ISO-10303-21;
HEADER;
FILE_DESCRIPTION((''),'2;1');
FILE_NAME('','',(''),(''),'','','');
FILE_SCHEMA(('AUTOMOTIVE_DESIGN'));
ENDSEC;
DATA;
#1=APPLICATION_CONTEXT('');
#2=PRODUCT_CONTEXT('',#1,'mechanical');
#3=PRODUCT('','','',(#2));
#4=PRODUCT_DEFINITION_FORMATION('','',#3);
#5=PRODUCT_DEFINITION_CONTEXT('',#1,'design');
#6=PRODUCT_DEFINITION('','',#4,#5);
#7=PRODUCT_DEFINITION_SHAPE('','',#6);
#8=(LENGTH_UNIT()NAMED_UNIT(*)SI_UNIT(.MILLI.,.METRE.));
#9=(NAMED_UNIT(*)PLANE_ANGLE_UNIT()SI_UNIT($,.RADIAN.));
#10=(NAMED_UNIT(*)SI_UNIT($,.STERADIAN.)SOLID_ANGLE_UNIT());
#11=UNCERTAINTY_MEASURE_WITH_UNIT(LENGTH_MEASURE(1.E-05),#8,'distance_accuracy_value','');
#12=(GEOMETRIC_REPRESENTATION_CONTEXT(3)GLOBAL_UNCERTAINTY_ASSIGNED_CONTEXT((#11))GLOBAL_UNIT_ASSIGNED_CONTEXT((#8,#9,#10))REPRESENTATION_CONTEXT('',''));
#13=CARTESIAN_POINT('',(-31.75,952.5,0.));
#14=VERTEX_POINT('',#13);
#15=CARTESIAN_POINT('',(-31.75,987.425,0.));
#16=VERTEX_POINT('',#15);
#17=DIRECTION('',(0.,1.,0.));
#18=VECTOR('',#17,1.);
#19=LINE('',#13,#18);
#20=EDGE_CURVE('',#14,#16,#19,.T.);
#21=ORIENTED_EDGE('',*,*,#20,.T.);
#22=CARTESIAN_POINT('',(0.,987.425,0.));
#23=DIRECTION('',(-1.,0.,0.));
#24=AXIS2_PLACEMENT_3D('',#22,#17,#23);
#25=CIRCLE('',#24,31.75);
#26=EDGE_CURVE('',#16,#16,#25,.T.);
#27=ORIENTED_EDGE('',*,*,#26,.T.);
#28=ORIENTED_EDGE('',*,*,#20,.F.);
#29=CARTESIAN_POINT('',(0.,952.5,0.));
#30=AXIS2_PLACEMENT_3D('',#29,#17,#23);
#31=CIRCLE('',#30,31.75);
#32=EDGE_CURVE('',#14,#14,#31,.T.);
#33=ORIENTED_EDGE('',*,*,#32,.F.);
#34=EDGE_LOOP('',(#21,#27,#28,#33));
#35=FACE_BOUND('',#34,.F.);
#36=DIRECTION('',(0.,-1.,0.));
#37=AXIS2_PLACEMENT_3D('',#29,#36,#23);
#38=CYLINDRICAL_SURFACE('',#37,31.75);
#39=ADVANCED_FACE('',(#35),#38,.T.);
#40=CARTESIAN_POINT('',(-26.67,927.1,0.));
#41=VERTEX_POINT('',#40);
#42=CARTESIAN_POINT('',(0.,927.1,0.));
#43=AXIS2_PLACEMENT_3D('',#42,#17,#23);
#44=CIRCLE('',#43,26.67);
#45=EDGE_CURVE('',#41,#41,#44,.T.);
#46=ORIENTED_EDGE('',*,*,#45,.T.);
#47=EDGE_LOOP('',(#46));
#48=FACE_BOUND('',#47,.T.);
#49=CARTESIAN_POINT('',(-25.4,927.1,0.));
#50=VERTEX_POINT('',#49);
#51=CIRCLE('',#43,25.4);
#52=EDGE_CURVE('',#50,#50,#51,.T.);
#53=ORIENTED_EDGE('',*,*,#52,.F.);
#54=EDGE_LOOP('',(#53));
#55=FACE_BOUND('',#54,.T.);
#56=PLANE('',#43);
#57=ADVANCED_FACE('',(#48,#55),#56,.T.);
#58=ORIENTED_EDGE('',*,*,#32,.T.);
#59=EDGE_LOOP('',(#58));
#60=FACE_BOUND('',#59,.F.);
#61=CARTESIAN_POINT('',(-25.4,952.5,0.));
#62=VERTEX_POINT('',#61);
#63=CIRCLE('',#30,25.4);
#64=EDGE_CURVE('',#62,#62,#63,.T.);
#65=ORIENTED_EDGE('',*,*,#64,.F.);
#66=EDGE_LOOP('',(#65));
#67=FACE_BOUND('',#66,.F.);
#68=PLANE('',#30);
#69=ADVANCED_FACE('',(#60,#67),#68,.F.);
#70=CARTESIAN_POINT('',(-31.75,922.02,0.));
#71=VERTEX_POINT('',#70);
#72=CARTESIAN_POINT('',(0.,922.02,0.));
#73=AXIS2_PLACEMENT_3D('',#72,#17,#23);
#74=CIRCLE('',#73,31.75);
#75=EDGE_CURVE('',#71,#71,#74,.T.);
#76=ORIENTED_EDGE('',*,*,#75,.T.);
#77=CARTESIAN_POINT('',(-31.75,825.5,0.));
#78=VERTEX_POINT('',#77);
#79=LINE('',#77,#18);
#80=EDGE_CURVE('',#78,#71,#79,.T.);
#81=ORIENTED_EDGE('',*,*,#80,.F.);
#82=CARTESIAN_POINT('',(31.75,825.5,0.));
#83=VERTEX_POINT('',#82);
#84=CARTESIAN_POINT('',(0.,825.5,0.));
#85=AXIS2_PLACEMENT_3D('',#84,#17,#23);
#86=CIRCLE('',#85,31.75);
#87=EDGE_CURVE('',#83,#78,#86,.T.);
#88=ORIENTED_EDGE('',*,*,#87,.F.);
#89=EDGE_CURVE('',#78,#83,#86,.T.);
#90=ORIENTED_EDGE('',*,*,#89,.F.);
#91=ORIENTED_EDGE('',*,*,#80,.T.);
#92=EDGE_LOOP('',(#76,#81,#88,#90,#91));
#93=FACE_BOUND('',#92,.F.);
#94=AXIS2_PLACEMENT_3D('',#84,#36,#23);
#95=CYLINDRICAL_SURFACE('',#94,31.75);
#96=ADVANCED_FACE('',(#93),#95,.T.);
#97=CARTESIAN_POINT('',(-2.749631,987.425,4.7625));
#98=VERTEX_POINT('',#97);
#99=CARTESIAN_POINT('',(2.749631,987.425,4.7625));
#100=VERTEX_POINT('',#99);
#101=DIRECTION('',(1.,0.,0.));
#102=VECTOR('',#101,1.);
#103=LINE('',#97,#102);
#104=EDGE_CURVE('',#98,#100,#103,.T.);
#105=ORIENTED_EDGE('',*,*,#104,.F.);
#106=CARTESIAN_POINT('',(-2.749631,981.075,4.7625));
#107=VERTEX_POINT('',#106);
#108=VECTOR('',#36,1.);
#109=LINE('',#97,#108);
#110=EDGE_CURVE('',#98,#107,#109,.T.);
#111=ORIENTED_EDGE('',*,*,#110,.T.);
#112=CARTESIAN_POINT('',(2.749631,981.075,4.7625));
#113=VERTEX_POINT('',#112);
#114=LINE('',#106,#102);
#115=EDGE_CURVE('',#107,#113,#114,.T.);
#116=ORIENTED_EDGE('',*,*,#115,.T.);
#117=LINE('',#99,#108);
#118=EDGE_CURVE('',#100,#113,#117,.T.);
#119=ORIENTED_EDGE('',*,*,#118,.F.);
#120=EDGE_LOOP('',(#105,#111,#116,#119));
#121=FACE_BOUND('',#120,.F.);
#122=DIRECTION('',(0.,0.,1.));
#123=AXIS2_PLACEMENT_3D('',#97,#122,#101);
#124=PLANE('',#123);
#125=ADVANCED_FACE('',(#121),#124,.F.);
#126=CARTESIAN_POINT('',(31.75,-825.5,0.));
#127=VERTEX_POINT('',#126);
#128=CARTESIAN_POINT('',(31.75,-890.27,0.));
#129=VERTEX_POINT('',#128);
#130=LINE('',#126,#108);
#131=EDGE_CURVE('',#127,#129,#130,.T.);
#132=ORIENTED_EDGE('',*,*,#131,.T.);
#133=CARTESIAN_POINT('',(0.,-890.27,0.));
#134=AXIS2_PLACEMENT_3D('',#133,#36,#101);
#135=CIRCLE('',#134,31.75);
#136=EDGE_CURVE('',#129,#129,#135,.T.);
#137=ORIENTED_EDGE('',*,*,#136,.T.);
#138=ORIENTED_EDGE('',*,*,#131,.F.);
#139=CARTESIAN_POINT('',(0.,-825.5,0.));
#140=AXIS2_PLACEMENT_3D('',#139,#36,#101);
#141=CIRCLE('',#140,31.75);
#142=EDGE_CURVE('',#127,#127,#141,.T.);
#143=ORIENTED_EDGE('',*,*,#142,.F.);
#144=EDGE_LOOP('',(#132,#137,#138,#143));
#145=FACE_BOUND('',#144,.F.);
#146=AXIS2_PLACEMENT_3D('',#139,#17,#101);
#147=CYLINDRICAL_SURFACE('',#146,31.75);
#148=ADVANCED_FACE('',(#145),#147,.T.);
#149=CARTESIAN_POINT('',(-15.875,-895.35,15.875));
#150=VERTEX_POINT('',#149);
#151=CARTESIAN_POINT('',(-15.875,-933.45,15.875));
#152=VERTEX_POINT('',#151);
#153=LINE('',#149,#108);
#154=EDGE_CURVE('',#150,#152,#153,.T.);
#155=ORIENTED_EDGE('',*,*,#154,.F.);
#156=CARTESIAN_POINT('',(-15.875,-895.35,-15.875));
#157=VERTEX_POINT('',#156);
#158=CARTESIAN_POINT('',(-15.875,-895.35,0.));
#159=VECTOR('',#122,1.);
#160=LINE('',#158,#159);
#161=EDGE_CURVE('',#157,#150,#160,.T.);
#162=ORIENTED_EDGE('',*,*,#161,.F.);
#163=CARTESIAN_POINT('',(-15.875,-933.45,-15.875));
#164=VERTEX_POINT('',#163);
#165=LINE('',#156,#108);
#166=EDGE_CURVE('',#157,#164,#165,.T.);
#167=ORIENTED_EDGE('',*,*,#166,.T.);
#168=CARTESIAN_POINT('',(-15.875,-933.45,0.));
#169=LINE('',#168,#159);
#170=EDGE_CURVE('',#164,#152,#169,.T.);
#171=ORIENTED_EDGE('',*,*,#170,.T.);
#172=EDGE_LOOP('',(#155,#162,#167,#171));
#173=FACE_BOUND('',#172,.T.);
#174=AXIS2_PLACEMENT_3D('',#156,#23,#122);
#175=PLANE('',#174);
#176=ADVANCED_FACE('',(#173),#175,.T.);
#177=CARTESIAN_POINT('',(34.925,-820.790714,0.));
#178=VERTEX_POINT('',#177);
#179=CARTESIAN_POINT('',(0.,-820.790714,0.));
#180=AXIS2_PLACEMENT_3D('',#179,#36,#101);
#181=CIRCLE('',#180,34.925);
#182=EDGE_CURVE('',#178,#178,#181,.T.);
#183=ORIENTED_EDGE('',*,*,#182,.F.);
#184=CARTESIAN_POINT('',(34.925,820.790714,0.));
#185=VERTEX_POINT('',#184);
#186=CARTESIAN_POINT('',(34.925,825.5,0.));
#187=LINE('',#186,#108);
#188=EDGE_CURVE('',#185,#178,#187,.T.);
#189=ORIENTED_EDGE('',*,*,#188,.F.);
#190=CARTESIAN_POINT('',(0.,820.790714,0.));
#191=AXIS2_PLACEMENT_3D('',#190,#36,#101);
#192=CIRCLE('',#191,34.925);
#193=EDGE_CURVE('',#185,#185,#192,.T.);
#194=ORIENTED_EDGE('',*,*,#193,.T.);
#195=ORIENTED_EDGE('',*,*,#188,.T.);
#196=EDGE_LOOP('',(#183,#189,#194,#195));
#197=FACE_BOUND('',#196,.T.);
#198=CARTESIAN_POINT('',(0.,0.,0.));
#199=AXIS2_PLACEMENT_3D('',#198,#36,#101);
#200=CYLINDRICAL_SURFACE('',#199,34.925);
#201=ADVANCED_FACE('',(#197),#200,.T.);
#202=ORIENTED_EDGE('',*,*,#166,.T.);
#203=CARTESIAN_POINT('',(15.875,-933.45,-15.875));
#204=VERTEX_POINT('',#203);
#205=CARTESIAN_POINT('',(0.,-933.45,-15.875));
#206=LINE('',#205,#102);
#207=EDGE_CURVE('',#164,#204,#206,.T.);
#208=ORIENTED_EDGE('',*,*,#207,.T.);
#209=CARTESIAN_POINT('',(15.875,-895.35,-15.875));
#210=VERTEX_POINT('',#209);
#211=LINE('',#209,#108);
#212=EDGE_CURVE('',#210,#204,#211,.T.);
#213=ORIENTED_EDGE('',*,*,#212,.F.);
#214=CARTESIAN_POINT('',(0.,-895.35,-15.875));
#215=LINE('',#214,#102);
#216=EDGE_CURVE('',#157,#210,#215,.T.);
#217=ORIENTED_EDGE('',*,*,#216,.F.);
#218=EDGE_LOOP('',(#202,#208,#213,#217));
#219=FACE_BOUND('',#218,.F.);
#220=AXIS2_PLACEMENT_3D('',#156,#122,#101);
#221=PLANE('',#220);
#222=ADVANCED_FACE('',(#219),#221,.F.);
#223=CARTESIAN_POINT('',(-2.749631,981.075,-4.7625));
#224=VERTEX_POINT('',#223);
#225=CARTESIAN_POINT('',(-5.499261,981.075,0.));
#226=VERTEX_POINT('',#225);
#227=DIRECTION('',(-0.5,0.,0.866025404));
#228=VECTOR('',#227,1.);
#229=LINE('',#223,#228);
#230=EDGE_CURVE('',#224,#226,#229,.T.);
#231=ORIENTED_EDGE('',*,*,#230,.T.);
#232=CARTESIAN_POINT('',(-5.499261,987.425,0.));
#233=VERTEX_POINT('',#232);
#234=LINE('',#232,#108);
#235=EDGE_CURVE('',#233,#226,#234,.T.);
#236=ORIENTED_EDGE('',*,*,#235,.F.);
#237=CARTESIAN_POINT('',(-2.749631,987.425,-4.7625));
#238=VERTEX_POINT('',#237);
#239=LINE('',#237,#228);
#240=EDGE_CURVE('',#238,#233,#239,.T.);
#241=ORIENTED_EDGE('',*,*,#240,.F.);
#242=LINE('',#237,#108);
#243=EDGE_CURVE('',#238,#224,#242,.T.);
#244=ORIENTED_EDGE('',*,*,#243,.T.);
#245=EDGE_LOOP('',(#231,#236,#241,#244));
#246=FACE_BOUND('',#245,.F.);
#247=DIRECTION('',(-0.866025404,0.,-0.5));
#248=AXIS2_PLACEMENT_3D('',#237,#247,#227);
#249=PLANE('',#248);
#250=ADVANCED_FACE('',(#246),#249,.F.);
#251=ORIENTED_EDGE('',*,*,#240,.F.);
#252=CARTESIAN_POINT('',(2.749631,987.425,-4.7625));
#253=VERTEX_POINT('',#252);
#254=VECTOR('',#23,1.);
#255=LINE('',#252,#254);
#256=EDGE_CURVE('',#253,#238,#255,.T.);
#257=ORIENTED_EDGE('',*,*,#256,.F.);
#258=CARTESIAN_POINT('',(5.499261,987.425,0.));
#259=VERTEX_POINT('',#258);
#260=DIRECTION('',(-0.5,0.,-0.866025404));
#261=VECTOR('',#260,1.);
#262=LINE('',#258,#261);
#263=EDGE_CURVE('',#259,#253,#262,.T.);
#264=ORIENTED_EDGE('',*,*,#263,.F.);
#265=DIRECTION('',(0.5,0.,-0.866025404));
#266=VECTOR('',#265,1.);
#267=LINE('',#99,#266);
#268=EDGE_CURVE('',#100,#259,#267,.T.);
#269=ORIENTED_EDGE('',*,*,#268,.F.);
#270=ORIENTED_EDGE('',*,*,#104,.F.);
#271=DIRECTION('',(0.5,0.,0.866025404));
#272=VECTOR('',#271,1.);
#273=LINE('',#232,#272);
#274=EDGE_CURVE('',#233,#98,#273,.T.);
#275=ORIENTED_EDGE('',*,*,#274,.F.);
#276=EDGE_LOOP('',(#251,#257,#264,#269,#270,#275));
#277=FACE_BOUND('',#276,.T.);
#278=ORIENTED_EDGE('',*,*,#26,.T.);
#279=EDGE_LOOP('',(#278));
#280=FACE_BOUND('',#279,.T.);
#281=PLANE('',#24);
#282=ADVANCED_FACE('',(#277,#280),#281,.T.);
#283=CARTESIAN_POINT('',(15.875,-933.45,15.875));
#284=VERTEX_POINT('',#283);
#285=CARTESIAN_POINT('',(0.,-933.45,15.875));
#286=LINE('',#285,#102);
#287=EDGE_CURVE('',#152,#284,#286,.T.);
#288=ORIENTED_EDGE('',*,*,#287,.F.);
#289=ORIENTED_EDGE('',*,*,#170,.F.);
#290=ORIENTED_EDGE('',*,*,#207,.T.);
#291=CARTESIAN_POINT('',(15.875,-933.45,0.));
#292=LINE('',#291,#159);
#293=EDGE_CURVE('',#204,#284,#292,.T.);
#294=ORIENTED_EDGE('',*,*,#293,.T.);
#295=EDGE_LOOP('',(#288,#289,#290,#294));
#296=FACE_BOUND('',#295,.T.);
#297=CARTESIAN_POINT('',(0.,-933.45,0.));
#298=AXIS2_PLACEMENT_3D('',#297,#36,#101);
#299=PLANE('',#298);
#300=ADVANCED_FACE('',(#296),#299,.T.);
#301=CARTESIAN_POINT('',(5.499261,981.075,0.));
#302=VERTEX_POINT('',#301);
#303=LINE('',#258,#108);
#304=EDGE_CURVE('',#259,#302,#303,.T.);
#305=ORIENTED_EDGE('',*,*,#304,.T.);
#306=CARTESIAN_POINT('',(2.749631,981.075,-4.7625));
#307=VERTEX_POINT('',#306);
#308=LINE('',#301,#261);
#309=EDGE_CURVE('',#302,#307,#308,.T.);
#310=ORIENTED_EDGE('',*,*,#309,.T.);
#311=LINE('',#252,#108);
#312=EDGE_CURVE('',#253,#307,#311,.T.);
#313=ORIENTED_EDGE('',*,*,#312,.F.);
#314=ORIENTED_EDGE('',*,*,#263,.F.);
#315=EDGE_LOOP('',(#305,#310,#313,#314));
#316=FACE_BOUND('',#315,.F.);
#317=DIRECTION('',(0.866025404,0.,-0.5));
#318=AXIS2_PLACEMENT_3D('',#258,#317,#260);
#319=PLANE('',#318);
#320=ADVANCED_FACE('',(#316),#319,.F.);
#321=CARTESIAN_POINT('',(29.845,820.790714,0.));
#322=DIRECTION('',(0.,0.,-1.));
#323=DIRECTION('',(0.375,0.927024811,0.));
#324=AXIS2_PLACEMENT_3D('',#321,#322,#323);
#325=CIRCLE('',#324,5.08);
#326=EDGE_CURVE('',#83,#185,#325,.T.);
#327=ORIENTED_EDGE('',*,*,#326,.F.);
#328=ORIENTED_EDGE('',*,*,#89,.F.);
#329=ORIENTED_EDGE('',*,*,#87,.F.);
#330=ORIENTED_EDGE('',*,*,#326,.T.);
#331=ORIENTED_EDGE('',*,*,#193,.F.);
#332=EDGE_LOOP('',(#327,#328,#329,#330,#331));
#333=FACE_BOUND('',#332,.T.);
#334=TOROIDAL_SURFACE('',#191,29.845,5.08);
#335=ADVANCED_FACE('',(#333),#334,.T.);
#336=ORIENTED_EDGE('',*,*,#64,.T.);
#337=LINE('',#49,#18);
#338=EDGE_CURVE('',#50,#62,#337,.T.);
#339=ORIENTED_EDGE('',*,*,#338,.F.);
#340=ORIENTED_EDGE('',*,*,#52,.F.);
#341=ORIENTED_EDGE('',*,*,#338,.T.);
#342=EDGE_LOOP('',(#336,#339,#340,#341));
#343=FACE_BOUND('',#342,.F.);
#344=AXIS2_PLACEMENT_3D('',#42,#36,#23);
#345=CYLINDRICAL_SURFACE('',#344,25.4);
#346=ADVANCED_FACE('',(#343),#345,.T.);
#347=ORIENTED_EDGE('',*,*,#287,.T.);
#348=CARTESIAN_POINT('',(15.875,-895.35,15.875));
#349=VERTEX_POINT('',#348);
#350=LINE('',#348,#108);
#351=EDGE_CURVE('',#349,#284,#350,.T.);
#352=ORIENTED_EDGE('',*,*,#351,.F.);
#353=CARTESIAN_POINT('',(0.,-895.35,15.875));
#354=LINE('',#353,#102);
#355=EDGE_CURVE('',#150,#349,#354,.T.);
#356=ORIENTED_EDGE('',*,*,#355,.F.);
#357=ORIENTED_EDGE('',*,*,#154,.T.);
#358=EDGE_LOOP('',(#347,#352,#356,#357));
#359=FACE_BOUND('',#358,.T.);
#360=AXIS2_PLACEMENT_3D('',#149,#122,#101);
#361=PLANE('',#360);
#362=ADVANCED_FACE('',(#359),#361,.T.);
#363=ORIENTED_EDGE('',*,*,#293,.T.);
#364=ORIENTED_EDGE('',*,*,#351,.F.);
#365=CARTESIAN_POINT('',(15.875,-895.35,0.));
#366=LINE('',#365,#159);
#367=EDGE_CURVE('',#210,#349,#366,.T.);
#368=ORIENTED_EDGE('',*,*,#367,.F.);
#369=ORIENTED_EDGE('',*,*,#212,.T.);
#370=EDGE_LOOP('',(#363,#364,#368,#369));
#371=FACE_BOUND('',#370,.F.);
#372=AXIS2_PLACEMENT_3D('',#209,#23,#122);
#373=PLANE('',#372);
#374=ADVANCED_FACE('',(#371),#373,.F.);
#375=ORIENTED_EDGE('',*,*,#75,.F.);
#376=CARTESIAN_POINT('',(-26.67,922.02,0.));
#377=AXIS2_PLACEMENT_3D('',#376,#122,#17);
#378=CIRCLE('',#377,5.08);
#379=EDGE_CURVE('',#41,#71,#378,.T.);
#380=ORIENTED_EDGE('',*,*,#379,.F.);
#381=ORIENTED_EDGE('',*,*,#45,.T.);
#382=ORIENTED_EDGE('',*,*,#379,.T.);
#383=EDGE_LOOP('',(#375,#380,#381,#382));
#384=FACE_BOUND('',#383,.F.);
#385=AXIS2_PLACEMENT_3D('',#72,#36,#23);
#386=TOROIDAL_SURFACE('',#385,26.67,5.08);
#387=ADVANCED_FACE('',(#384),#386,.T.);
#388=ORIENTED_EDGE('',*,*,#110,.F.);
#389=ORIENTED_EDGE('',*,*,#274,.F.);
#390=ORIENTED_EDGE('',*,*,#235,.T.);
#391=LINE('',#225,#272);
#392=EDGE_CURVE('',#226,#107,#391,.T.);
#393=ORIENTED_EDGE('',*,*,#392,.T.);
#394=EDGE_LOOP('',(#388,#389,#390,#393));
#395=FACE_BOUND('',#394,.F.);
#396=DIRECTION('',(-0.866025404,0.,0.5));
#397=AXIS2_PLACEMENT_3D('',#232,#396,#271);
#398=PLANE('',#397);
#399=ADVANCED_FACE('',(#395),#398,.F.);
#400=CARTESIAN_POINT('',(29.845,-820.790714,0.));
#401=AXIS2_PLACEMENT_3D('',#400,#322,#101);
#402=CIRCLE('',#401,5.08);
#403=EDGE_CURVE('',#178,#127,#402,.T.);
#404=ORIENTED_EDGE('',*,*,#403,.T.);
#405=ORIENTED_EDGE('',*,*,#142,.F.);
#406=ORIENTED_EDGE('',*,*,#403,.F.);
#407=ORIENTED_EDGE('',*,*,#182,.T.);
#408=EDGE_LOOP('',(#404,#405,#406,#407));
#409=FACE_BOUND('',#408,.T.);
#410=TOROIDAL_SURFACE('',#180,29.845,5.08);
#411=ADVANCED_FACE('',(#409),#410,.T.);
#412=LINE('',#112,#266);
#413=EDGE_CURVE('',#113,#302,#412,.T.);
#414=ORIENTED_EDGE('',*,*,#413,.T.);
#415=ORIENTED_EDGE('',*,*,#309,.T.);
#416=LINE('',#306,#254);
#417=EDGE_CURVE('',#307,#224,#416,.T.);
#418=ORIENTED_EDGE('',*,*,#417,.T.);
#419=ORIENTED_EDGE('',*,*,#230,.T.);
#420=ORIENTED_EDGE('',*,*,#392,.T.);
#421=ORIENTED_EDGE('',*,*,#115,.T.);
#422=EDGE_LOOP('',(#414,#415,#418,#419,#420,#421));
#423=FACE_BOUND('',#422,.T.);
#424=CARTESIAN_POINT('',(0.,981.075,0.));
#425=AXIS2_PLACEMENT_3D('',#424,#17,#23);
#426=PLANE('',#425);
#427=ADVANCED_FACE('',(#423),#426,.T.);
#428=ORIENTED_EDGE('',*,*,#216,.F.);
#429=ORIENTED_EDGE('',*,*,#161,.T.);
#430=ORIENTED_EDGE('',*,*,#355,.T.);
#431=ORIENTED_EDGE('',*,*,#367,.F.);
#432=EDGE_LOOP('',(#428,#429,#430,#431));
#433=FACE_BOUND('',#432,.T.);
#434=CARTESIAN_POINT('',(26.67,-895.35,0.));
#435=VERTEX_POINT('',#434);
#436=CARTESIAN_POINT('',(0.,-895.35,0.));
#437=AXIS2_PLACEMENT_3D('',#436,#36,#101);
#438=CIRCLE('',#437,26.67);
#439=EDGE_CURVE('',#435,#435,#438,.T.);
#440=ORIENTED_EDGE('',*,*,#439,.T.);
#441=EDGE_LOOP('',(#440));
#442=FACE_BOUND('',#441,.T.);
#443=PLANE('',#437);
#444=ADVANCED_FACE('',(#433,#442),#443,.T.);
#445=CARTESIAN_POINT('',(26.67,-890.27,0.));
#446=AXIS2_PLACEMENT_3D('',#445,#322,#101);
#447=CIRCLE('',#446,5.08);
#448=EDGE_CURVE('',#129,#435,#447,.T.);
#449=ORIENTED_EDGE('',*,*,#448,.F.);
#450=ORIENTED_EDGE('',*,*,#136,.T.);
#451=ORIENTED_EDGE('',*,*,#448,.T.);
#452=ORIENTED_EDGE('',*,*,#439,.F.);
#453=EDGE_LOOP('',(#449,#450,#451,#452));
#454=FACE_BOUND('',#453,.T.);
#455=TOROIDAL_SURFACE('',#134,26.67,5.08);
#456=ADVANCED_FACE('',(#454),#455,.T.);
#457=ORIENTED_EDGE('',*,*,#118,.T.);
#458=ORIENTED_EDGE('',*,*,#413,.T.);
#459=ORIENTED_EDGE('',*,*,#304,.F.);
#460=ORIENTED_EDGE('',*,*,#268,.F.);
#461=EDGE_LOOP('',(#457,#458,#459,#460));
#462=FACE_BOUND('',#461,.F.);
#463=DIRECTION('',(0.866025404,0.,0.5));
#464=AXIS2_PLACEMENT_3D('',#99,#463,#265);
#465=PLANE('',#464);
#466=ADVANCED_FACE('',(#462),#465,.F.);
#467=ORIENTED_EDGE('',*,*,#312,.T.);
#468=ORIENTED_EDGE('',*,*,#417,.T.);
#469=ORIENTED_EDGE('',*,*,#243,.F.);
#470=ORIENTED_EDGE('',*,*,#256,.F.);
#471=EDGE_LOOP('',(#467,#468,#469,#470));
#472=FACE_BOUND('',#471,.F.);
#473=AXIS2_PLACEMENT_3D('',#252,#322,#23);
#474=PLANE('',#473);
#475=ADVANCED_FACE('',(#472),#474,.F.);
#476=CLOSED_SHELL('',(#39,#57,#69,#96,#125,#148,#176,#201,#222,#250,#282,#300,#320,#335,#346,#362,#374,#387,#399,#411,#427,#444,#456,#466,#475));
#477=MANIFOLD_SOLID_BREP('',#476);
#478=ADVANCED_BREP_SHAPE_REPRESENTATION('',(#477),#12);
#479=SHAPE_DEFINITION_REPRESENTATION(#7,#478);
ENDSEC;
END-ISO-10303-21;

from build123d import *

# Parameters (mm, degrees)
F0_R      = 34.925
F1_DEPTH  = 825.5
F2_R      = 31.75
F3_DEPTH  = 69.85
F4_R      = 31.75
F5_DEPTH  = 101.6
F6_W      = 31.75
F6_H      = 31.75
F7_DEPTH  = 38.1
F8_R      = 25.4
F9_DEPTH  = 25.4
F10_R     = 31.75
F10_R_2   = 25.4
F11_DEPTH = 34.925
F14_DEPTH = 6.35


# Not quite as in the source:
# - a fillet or chamfer that OpenCascade refuses, or shapes differently, is made with other operations: its cross-section is extruded or revolved along the edge and cut away or added


with BuildPart() as f1:
    # F0 (on Front) → F1 (new body, symmetric)
    with BuildSketch(Plane.XZ):
        Circle(F0_R)
    extrude(amount=F1_DEPTH, both=True)

    # F2 (on face) → F3 (join)
    with BuildSketch(Plane.XZ.offset(825.5)):
        Circle(F2_R)
    extrude(amount=F3_DEPTH)

    # F4 (on face) → F5 (join)
    with BuildSketch(Plane(origin=(0, 825.5, 0), x_dir=(-1, 0, 0), z_dir=(0, 1, 0))):
        Circle(F4_R)
    extrude(amount=F5_DEPTH)

    # F6 (on face) → F7 (join)
    with BuildSketch(Plane.XZ.offset(895.35)):
        Rectangle(F6_W, F6_H)
    extrude(amount=F7_DEPTH)

    # F8 (on face) → F9 (join)
    with BuildSketch(Plane(origin=(0, 927.1, 0), x_dir=(-1, 0, 0), z_dir=(0, 1, 0))):
        Circle(F8_R)
    extrude(amount=F9_DEPTH)

    # F10 (on face) → F11 (join)
    with BuildSketch(Plane(origin=(0, 952.5, 0), x_dir=(-1, 0, 0), z_dir=(0, 1, 0))):
        Circle(F10_R)
        Circle(F10_R_2, mode=Mode.SUBTRACT)
        Circle(F10_R_2)
    extrude(amount=F11_DEPTH)

    # F12: fillet of radius 5.08 on 4 edges, made by hand

    # F12_s1 → F12_t2 (revolve, cut)
    with BuildSketch(Plane.XY):
        with BuildLine():
            ThreePointArc((31.75, 825.5), (34.0571134838, 823.6305202921), (34.925, 820.7907139607))
            Line((34.925, 820.7907139607), (34.925, 825.5))
            Line((34.925, 825.5), (31.75, 825.5))
        make_face()
    revolve(axis=Axis((0, 825.5, 0), (0, -1, 0)), mode=Mode.SUBTRACT)

    # F12_s3 → F12_t4 (revolve, cut)
    with BuildSketch(Plane.XY):
        with BuildLine():
            ThreePointArc((34.925, -820.7907139607), (34.0571134838, -823.6305202921), (31.75, -825.5))
            Line((31.75, -825.5), (34.925, -825.5))
            Line((34.925, -825.5), (34.925, -820.7907139607))
        make_face()
    revolve(axis=Axis((0, -825.5, 0), (0, -1, 0)), mode=Mode.SUBTRACT)

    # F12_s5 → F12_t6 (revolve, cut)
    with BuildSketch(Plane.XY):
        with BuildLine():
            ThreePointArc((31.75, -890.27), (30.2621024484, -893.8621024484), (26.67, -895.35))
            Line((26.67, -895.35), (31.75, -895.35))
            Line((31.75, -895.35), (31.75, -890.27))
        make_face()
    revolve(axis=Axis((0, -895.35, 0), (0, -1, 0)), mode=Mode.SUBTRACT)

    # F12_s7 → F12_t8 (revolve, cut)
    with BuildSketch(Plane.XY):
        with BuildLine():
            ThreePointArc((-26.67, 927.1), (-30.2621024484, 925.6121024484), (-31.75, 922.02))
            Line((-31.75, 922.02), (-31.75, 927.1))
            Line((-31.75, 927.1), (-26.67, 927.1))
        make_face()
    revolve(axis=Axis((0, 927.1, 0), (0, 1, 0)), mode=Mode.SUBTRACT)

    # F13 (on face) → F14 (cut)
    with BuildSketch(Plane(origin=(0, 987.425, 0), x_dir=(-1, 0, 0), z_dir=(0, 1, 0))):
        Polygon((2.749630657, 4.7625), (-2.749630657, 4.7625), (-5.499261314, 0), (-2.749630657, -4.7625), (2.749630657, -4.7625), (5.499261314, 0), align=None)
    extrude(amount=-F14_DEPTH, mode=Mode.SUBTRACT)


solid = f1.part
